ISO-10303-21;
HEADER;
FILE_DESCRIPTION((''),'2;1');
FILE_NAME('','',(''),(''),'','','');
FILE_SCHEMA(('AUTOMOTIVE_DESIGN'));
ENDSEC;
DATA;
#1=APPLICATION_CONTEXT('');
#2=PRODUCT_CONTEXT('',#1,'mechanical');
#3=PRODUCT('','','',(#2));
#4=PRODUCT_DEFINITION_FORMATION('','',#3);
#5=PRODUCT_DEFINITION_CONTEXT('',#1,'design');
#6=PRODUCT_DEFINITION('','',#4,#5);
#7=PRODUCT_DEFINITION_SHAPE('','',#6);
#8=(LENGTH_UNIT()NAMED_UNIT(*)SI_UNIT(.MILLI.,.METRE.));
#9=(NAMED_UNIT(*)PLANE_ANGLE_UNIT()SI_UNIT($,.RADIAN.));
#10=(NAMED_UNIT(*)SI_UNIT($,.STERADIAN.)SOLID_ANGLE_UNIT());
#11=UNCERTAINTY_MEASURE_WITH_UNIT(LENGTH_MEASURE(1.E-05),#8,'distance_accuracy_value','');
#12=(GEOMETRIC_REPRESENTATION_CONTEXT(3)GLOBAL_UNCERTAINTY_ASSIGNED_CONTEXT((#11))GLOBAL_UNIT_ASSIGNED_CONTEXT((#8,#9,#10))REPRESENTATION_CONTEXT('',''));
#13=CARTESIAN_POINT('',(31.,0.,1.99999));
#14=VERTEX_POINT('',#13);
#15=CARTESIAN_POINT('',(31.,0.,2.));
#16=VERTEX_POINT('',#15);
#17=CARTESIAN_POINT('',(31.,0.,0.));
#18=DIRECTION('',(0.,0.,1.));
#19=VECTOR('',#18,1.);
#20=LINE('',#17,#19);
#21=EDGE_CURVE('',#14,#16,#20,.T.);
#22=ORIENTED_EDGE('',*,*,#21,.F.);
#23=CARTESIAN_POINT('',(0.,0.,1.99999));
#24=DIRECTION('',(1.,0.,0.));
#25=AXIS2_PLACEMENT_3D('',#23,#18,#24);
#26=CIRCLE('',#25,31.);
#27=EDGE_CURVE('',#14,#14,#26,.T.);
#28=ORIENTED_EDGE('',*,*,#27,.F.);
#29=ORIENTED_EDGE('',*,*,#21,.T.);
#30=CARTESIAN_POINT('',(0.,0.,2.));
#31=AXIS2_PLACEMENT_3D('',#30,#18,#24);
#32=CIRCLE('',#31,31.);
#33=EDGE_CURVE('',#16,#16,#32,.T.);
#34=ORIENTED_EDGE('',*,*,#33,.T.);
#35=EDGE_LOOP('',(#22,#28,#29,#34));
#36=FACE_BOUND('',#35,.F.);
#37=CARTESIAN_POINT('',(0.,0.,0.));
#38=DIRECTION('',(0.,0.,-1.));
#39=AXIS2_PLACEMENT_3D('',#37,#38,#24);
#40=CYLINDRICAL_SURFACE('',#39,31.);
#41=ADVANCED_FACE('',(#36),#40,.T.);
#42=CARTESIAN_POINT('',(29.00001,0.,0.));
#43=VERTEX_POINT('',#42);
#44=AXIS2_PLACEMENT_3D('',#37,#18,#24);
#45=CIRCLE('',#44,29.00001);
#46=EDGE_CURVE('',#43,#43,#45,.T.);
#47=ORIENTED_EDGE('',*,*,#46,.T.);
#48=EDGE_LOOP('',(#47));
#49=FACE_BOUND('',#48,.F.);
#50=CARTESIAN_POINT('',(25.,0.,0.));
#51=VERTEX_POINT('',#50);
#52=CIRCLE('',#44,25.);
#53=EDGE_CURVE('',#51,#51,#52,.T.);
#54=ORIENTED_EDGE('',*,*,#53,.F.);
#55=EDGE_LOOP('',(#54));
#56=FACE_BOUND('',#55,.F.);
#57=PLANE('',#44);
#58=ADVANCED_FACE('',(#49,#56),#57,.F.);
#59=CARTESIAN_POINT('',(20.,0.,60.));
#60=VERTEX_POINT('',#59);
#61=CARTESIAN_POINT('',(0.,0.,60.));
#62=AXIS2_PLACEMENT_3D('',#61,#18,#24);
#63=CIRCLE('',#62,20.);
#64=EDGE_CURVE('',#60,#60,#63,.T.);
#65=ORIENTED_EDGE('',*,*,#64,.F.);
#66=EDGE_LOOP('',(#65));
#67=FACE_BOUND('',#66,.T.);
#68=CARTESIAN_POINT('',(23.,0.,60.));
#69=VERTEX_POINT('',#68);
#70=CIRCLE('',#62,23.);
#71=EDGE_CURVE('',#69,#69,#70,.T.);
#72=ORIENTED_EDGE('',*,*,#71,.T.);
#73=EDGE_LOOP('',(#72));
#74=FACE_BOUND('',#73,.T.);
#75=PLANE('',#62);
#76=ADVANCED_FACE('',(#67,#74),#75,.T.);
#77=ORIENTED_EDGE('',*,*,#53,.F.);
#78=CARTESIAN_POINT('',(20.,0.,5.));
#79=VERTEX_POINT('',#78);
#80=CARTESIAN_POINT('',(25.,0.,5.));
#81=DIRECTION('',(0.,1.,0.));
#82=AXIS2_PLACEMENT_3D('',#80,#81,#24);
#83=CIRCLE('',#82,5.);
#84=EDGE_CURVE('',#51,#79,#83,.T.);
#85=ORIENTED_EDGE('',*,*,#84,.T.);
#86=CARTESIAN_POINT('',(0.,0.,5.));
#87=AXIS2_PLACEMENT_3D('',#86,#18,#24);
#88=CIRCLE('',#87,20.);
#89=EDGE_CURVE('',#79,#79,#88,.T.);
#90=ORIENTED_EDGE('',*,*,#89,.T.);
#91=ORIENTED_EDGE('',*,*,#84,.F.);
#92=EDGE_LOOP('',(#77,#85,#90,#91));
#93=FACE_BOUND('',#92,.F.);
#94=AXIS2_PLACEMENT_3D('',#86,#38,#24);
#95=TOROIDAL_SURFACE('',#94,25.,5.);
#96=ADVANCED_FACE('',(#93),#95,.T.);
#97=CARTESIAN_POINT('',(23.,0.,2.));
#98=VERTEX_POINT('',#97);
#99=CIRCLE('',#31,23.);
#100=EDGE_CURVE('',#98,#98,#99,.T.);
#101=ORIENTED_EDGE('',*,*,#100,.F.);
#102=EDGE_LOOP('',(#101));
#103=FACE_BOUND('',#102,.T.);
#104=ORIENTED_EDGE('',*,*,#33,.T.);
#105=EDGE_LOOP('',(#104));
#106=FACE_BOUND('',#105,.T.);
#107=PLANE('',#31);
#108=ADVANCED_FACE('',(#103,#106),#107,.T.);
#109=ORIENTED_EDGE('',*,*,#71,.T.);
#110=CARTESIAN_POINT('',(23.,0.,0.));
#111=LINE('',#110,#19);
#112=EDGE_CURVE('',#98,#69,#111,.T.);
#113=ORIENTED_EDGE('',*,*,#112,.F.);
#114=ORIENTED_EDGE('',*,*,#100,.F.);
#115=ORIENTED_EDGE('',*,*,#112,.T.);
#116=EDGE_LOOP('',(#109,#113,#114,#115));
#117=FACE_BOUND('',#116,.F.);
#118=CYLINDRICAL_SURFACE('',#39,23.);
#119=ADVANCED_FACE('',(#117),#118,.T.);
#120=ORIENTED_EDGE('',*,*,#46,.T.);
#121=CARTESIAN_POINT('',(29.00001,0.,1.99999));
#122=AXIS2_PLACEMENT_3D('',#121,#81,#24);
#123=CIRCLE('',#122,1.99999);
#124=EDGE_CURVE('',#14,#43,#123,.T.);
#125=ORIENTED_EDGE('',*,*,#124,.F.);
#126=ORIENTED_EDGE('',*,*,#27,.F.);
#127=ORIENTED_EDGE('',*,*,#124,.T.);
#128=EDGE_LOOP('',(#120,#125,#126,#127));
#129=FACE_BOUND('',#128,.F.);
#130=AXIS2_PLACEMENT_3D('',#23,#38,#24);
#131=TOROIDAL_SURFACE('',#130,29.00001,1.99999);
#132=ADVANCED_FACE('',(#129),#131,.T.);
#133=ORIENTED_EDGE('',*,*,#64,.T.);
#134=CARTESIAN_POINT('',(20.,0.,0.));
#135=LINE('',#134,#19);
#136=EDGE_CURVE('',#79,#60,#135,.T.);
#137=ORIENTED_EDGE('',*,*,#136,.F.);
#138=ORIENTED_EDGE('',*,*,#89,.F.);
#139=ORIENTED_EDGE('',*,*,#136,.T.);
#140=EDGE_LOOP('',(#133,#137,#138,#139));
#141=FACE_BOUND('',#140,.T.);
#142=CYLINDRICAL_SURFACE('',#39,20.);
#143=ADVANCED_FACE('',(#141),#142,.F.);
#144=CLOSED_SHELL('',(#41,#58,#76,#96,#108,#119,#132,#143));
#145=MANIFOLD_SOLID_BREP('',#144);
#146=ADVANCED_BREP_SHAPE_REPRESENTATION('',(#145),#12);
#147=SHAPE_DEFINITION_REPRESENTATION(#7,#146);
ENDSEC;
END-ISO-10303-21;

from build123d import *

# Parameters (mm, degrees)
F0_R     = 23
F0_R_2   = 20
F1_DEPTH = 60
F0_R_3   = 31
F2_DEPTH = 2
F3_R     = 1.99999
F4_R     = 5


# Not quite as in the source:
# - a fillet or chamfer is up to 0.001 mm smaller than in the source, because OpenCascade refuses the exact size


with BuildPart() as f1:
    # F0 (on Top) → F1 (new body)
    with BuildSketch(Plane.XY):
        Circle(F0_R)
        Circle(F0_R_2, mode=Mode.SUBTRACT)
    extrude(amount=F1_DEPTH)

    # F0 (on Top) → F2 (join)
    with BuildSketch(Plane.XY):
        Circle(F0_R_3)
        Circle(F0_R, mode=Mode.SUBTRACT)
    extrude(amount=F2_DEPTH)

    # F3 (radius 2 in the source; OpenCascade refuses exactly that, so slightly less here)
    f3_edges = [f1.edges().sort_by_distance(p)[0] for p in [
        (-31, 0, 0),
    ]]
    fillet(f3_edges, radius=F3_R)

    # F4
    f4_edges = [f1.edges().sort_by_distance(p)[0] for p in [
        (-20, 0, 0),
    ]]
    fillet(f4_edges, radius=F4_R)


solid = f1.part
